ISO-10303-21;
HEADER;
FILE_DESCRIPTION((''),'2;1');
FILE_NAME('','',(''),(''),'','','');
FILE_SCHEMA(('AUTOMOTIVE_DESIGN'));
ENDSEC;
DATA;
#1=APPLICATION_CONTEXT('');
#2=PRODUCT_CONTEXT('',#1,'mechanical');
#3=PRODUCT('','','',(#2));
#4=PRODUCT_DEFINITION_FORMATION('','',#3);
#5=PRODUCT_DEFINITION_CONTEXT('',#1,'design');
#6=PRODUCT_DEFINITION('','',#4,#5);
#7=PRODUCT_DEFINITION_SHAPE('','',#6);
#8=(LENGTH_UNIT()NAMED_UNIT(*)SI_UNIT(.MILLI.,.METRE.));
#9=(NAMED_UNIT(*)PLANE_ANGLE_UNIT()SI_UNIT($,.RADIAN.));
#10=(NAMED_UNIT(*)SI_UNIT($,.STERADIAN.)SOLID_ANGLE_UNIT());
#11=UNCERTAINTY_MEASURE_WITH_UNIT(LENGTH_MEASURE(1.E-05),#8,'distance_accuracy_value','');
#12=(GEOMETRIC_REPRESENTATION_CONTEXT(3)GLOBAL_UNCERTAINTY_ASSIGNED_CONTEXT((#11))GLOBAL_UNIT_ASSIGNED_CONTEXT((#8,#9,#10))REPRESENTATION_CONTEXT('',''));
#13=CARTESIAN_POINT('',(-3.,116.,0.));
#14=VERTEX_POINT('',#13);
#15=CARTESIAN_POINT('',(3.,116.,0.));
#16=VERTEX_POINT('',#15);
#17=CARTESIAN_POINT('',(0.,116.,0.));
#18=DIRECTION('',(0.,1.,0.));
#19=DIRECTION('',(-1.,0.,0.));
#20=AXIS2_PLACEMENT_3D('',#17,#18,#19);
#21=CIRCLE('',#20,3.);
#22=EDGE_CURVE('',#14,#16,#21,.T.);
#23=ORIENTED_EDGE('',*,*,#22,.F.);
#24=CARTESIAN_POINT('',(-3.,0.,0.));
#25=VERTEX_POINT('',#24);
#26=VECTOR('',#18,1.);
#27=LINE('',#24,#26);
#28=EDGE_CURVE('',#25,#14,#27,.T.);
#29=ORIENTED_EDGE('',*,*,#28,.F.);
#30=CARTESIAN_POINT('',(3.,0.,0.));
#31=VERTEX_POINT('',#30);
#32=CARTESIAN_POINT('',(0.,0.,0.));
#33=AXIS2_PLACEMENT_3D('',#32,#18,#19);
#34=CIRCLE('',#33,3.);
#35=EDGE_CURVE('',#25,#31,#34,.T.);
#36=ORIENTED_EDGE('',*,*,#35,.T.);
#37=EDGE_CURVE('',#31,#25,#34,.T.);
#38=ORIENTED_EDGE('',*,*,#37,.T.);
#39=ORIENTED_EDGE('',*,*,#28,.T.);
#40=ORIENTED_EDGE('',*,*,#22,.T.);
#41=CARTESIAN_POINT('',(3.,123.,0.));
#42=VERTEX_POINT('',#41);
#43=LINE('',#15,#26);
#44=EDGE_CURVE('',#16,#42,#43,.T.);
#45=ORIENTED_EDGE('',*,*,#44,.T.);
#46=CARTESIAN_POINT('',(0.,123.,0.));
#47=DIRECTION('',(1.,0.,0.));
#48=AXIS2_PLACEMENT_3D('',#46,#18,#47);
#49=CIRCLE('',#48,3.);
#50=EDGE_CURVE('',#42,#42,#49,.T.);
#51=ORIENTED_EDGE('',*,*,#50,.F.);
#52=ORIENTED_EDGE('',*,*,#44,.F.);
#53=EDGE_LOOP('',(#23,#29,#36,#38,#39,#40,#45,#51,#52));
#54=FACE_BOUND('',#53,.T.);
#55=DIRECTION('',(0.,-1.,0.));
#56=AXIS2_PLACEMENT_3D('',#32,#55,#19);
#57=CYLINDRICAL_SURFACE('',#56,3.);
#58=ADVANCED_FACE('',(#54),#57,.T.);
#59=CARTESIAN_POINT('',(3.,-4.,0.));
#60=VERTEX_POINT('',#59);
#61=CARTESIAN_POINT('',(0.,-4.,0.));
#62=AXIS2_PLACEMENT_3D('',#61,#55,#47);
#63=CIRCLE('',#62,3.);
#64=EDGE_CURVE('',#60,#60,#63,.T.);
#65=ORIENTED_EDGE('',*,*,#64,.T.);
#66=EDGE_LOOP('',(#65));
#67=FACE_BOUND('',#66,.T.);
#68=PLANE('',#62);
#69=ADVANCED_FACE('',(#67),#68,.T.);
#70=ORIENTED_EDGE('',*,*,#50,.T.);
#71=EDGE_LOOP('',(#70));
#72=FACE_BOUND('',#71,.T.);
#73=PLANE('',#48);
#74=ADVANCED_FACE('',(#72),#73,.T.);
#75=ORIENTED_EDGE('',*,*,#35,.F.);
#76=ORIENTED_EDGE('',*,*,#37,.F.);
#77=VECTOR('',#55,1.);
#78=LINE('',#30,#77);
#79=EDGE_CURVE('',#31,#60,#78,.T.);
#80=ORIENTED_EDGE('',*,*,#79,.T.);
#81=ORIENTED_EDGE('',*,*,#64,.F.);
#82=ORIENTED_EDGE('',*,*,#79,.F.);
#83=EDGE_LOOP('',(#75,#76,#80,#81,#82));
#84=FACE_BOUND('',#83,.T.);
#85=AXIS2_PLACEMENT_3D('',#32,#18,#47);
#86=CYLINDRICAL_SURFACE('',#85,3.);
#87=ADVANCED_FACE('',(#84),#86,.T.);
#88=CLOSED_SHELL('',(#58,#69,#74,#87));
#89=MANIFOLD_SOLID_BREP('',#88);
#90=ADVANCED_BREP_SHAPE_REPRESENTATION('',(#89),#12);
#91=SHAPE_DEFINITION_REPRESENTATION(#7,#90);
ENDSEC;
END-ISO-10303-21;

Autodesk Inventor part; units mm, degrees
ref_plane "YZ Plane" through (0, 0, 0) normal (1, 0, 0) x (0, 1, 0)
ref_plane "XZ Plane" through (0, 0, 0) normal (0, 1, 0) x (-1, 0, 0)
ref_plane "XY Plane" through (0, 0, 0) normal (0, 0, 1) x (1, 0, 0)
sketch "Sketch1" plane through (0, 0, 0) normal (0, 1, 0) x (-1, 0, 0)
  point P0 (0, 0)
sketch "Sketch2" plane through (0, 0, 0) normal (0, 1, 0) x (-1, 0, 0)
  circle A0 centre (0, 0) radius 3
  dimension "d0" = 6
extrude "Extrusion1" add sketch "Sketch2" along normal blind 116
sketch "Sketch3" plane through (0, 116, 0) normal (0, 1, 0) x (1, 0, 0)
  circle A0 centre (0, 0) radius 3
extrude "Extrusion2" add sketch "Sketch3" along normal blind 10
sketch "Sketch4" plane through (0, 0, 0) normal (0, -1, 0) x (1, 0, 0)
  circle A0 centre (0, 0) radius 3 projected
  circle A1 centre (0, 0) radius 3
  dimension "d5" = 6
extrude "Extrusion3" add sketch "Sketch4" along normal blind 10
fillet "Fillet1" radius 2 1 edges at (-3, -10, 0)
fillet "Face Fillet1" radius 2 1 edges at (-3, 126, 0)
sketch "Sketch5" plane through (0, 126, 0) normal (0, 1, 0) x (1, 0, 0)
  circle A0 centre (0, 0) radius 3
extrude "Extrusion4" cut sketch "Sketch5" against normal blind 2
sketch "Sketch6" plane through (0, 124, 0) normal (0, 1, 0) x (1, 0, 0)
  circle A0 centre (0, 0) radius 3
extrude "Extrusion5" cut sketch "Sketch6" against normal blind 1
sketch "Sketch7" plane through (0, -10, 0) normal (0, -1, 0) x (1, 0, 0)
  circle A0 centre (0, 0) radius 3
  dimension "d14" = 6
extrude "Extrusion6" cut sketch "Sketch7" against normal blind 3
sketch "Sketch8" plane through (0, -7, 0) normal (0, -1, 0) x (1, 0, 0)
  circle A0 centre (0, 0) radius 3
  dimension "d17" = 6
extrude "Extrusion7" cut sketch "Sketch8" against normal blind 2
sketch "Sketch9" plane through (0, -5, 0) normal (0, -1, 0) x (1, 0, 0)
  circle A0 centre (0, 0) radius 3
  dimension "d20" = 6
extrude "Extrusion8" cut sketch "Sketch9" against normal blind 1
properties material "Gold"
